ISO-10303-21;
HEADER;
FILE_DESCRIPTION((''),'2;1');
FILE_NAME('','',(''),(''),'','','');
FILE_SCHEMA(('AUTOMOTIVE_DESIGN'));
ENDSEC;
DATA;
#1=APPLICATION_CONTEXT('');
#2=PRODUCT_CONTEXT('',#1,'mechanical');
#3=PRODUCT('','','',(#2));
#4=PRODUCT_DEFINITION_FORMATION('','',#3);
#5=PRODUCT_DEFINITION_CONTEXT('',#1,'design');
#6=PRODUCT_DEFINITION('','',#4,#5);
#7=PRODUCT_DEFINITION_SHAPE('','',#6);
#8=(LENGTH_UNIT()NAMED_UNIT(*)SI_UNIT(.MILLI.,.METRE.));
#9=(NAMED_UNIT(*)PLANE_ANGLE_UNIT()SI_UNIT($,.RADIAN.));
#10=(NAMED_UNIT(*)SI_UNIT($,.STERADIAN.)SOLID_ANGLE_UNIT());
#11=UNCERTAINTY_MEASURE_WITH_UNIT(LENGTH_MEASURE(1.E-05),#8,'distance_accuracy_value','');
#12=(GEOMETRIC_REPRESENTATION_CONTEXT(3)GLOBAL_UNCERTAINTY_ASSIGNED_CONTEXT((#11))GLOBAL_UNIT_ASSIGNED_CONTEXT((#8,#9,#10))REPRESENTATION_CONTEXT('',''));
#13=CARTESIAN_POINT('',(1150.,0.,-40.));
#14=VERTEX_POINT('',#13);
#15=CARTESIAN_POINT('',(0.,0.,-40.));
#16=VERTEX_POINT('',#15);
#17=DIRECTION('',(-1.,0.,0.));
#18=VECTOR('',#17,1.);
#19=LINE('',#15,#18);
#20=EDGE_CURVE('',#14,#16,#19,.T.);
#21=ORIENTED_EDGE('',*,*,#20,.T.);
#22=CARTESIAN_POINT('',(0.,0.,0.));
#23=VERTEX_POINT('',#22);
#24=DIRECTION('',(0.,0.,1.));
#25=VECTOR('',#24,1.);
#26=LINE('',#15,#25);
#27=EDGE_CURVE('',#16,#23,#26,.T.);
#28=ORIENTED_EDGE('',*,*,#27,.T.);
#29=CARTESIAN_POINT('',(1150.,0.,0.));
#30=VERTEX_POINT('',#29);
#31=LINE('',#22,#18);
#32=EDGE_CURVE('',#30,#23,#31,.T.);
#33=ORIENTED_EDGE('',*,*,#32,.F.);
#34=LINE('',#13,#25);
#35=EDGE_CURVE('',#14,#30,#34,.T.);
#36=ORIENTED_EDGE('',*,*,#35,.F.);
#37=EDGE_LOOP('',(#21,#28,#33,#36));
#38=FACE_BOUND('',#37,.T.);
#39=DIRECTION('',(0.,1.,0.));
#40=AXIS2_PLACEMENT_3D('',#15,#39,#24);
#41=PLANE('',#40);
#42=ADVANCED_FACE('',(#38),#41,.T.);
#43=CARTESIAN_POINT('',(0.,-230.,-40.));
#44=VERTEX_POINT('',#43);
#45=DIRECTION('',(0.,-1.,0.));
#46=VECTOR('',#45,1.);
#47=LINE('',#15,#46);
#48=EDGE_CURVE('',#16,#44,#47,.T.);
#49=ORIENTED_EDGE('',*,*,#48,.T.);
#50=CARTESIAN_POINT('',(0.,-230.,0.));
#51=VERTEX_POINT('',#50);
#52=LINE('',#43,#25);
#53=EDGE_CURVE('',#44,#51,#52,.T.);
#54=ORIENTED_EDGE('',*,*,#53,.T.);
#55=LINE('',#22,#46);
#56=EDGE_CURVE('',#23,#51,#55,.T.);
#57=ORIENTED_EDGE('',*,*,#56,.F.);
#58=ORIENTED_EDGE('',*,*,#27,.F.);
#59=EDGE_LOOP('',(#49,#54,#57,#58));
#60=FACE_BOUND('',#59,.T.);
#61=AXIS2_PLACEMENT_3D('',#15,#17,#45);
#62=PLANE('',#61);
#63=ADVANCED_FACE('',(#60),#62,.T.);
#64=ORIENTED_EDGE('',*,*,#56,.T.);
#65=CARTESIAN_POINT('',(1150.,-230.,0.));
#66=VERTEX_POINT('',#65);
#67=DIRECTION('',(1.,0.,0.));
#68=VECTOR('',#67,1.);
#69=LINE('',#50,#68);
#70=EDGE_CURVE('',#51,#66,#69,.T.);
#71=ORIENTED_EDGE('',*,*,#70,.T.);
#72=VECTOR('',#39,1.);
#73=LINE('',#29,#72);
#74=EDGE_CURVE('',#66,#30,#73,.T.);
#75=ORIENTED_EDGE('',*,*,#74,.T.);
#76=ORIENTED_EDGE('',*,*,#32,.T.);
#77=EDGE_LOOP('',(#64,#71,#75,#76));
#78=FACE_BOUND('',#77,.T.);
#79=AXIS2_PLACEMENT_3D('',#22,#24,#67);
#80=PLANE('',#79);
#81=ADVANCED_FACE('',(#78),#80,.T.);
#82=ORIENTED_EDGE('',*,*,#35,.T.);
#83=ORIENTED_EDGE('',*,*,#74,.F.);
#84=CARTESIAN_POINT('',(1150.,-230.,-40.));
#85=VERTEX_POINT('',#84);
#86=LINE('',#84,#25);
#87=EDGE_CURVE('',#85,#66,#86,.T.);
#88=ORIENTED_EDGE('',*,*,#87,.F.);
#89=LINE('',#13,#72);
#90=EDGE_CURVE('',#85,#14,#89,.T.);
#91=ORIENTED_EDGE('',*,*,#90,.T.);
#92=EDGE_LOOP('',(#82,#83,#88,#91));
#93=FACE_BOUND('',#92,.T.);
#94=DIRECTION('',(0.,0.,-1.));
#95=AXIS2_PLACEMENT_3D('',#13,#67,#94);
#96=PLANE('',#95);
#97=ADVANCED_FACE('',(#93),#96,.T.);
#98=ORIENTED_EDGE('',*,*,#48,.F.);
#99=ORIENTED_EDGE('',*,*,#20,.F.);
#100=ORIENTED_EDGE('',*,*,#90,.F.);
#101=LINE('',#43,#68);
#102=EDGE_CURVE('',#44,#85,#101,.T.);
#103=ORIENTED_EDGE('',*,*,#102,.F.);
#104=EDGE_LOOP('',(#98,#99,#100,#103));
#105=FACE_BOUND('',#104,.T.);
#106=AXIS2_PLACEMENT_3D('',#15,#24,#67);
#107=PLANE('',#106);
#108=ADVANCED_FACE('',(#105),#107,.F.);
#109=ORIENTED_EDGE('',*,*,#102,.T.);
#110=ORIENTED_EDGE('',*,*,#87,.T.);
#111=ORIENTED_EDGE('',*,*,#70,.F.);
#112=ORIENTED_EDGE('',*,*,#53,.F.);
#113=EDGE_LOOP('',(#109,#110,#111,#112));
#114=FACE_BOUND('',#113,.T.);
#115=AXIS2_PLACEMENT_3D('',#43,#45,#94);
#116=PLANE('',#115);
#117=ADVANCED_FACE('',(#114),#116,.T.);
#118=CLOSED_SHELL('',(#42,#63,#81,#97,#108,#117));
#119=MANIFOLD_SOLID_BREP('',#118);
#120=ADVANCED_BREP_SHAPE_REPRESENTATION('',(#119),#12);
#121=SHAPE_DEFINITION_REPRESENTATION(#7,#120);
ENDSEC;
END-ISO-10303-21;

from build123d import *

# Parameters (mm, degrees)
IZIM1_W            = 1150
IZIM1_H            = 230
TABAN_FLAN_1_DEPTH = 40


# Sheet-metal steps are written as plain solids
with BuildPart() as part:
    # Çizim1 → Taban-Flanş1 (new body)
    with BuildSketch(Plane.XY):
        with Locations((575, -115)):
            Rectangle(IZIM1_W, IZIM1_H)
    extrude(amount=-TABAN_FLAN_1_DEPTH)


solid = part.part
